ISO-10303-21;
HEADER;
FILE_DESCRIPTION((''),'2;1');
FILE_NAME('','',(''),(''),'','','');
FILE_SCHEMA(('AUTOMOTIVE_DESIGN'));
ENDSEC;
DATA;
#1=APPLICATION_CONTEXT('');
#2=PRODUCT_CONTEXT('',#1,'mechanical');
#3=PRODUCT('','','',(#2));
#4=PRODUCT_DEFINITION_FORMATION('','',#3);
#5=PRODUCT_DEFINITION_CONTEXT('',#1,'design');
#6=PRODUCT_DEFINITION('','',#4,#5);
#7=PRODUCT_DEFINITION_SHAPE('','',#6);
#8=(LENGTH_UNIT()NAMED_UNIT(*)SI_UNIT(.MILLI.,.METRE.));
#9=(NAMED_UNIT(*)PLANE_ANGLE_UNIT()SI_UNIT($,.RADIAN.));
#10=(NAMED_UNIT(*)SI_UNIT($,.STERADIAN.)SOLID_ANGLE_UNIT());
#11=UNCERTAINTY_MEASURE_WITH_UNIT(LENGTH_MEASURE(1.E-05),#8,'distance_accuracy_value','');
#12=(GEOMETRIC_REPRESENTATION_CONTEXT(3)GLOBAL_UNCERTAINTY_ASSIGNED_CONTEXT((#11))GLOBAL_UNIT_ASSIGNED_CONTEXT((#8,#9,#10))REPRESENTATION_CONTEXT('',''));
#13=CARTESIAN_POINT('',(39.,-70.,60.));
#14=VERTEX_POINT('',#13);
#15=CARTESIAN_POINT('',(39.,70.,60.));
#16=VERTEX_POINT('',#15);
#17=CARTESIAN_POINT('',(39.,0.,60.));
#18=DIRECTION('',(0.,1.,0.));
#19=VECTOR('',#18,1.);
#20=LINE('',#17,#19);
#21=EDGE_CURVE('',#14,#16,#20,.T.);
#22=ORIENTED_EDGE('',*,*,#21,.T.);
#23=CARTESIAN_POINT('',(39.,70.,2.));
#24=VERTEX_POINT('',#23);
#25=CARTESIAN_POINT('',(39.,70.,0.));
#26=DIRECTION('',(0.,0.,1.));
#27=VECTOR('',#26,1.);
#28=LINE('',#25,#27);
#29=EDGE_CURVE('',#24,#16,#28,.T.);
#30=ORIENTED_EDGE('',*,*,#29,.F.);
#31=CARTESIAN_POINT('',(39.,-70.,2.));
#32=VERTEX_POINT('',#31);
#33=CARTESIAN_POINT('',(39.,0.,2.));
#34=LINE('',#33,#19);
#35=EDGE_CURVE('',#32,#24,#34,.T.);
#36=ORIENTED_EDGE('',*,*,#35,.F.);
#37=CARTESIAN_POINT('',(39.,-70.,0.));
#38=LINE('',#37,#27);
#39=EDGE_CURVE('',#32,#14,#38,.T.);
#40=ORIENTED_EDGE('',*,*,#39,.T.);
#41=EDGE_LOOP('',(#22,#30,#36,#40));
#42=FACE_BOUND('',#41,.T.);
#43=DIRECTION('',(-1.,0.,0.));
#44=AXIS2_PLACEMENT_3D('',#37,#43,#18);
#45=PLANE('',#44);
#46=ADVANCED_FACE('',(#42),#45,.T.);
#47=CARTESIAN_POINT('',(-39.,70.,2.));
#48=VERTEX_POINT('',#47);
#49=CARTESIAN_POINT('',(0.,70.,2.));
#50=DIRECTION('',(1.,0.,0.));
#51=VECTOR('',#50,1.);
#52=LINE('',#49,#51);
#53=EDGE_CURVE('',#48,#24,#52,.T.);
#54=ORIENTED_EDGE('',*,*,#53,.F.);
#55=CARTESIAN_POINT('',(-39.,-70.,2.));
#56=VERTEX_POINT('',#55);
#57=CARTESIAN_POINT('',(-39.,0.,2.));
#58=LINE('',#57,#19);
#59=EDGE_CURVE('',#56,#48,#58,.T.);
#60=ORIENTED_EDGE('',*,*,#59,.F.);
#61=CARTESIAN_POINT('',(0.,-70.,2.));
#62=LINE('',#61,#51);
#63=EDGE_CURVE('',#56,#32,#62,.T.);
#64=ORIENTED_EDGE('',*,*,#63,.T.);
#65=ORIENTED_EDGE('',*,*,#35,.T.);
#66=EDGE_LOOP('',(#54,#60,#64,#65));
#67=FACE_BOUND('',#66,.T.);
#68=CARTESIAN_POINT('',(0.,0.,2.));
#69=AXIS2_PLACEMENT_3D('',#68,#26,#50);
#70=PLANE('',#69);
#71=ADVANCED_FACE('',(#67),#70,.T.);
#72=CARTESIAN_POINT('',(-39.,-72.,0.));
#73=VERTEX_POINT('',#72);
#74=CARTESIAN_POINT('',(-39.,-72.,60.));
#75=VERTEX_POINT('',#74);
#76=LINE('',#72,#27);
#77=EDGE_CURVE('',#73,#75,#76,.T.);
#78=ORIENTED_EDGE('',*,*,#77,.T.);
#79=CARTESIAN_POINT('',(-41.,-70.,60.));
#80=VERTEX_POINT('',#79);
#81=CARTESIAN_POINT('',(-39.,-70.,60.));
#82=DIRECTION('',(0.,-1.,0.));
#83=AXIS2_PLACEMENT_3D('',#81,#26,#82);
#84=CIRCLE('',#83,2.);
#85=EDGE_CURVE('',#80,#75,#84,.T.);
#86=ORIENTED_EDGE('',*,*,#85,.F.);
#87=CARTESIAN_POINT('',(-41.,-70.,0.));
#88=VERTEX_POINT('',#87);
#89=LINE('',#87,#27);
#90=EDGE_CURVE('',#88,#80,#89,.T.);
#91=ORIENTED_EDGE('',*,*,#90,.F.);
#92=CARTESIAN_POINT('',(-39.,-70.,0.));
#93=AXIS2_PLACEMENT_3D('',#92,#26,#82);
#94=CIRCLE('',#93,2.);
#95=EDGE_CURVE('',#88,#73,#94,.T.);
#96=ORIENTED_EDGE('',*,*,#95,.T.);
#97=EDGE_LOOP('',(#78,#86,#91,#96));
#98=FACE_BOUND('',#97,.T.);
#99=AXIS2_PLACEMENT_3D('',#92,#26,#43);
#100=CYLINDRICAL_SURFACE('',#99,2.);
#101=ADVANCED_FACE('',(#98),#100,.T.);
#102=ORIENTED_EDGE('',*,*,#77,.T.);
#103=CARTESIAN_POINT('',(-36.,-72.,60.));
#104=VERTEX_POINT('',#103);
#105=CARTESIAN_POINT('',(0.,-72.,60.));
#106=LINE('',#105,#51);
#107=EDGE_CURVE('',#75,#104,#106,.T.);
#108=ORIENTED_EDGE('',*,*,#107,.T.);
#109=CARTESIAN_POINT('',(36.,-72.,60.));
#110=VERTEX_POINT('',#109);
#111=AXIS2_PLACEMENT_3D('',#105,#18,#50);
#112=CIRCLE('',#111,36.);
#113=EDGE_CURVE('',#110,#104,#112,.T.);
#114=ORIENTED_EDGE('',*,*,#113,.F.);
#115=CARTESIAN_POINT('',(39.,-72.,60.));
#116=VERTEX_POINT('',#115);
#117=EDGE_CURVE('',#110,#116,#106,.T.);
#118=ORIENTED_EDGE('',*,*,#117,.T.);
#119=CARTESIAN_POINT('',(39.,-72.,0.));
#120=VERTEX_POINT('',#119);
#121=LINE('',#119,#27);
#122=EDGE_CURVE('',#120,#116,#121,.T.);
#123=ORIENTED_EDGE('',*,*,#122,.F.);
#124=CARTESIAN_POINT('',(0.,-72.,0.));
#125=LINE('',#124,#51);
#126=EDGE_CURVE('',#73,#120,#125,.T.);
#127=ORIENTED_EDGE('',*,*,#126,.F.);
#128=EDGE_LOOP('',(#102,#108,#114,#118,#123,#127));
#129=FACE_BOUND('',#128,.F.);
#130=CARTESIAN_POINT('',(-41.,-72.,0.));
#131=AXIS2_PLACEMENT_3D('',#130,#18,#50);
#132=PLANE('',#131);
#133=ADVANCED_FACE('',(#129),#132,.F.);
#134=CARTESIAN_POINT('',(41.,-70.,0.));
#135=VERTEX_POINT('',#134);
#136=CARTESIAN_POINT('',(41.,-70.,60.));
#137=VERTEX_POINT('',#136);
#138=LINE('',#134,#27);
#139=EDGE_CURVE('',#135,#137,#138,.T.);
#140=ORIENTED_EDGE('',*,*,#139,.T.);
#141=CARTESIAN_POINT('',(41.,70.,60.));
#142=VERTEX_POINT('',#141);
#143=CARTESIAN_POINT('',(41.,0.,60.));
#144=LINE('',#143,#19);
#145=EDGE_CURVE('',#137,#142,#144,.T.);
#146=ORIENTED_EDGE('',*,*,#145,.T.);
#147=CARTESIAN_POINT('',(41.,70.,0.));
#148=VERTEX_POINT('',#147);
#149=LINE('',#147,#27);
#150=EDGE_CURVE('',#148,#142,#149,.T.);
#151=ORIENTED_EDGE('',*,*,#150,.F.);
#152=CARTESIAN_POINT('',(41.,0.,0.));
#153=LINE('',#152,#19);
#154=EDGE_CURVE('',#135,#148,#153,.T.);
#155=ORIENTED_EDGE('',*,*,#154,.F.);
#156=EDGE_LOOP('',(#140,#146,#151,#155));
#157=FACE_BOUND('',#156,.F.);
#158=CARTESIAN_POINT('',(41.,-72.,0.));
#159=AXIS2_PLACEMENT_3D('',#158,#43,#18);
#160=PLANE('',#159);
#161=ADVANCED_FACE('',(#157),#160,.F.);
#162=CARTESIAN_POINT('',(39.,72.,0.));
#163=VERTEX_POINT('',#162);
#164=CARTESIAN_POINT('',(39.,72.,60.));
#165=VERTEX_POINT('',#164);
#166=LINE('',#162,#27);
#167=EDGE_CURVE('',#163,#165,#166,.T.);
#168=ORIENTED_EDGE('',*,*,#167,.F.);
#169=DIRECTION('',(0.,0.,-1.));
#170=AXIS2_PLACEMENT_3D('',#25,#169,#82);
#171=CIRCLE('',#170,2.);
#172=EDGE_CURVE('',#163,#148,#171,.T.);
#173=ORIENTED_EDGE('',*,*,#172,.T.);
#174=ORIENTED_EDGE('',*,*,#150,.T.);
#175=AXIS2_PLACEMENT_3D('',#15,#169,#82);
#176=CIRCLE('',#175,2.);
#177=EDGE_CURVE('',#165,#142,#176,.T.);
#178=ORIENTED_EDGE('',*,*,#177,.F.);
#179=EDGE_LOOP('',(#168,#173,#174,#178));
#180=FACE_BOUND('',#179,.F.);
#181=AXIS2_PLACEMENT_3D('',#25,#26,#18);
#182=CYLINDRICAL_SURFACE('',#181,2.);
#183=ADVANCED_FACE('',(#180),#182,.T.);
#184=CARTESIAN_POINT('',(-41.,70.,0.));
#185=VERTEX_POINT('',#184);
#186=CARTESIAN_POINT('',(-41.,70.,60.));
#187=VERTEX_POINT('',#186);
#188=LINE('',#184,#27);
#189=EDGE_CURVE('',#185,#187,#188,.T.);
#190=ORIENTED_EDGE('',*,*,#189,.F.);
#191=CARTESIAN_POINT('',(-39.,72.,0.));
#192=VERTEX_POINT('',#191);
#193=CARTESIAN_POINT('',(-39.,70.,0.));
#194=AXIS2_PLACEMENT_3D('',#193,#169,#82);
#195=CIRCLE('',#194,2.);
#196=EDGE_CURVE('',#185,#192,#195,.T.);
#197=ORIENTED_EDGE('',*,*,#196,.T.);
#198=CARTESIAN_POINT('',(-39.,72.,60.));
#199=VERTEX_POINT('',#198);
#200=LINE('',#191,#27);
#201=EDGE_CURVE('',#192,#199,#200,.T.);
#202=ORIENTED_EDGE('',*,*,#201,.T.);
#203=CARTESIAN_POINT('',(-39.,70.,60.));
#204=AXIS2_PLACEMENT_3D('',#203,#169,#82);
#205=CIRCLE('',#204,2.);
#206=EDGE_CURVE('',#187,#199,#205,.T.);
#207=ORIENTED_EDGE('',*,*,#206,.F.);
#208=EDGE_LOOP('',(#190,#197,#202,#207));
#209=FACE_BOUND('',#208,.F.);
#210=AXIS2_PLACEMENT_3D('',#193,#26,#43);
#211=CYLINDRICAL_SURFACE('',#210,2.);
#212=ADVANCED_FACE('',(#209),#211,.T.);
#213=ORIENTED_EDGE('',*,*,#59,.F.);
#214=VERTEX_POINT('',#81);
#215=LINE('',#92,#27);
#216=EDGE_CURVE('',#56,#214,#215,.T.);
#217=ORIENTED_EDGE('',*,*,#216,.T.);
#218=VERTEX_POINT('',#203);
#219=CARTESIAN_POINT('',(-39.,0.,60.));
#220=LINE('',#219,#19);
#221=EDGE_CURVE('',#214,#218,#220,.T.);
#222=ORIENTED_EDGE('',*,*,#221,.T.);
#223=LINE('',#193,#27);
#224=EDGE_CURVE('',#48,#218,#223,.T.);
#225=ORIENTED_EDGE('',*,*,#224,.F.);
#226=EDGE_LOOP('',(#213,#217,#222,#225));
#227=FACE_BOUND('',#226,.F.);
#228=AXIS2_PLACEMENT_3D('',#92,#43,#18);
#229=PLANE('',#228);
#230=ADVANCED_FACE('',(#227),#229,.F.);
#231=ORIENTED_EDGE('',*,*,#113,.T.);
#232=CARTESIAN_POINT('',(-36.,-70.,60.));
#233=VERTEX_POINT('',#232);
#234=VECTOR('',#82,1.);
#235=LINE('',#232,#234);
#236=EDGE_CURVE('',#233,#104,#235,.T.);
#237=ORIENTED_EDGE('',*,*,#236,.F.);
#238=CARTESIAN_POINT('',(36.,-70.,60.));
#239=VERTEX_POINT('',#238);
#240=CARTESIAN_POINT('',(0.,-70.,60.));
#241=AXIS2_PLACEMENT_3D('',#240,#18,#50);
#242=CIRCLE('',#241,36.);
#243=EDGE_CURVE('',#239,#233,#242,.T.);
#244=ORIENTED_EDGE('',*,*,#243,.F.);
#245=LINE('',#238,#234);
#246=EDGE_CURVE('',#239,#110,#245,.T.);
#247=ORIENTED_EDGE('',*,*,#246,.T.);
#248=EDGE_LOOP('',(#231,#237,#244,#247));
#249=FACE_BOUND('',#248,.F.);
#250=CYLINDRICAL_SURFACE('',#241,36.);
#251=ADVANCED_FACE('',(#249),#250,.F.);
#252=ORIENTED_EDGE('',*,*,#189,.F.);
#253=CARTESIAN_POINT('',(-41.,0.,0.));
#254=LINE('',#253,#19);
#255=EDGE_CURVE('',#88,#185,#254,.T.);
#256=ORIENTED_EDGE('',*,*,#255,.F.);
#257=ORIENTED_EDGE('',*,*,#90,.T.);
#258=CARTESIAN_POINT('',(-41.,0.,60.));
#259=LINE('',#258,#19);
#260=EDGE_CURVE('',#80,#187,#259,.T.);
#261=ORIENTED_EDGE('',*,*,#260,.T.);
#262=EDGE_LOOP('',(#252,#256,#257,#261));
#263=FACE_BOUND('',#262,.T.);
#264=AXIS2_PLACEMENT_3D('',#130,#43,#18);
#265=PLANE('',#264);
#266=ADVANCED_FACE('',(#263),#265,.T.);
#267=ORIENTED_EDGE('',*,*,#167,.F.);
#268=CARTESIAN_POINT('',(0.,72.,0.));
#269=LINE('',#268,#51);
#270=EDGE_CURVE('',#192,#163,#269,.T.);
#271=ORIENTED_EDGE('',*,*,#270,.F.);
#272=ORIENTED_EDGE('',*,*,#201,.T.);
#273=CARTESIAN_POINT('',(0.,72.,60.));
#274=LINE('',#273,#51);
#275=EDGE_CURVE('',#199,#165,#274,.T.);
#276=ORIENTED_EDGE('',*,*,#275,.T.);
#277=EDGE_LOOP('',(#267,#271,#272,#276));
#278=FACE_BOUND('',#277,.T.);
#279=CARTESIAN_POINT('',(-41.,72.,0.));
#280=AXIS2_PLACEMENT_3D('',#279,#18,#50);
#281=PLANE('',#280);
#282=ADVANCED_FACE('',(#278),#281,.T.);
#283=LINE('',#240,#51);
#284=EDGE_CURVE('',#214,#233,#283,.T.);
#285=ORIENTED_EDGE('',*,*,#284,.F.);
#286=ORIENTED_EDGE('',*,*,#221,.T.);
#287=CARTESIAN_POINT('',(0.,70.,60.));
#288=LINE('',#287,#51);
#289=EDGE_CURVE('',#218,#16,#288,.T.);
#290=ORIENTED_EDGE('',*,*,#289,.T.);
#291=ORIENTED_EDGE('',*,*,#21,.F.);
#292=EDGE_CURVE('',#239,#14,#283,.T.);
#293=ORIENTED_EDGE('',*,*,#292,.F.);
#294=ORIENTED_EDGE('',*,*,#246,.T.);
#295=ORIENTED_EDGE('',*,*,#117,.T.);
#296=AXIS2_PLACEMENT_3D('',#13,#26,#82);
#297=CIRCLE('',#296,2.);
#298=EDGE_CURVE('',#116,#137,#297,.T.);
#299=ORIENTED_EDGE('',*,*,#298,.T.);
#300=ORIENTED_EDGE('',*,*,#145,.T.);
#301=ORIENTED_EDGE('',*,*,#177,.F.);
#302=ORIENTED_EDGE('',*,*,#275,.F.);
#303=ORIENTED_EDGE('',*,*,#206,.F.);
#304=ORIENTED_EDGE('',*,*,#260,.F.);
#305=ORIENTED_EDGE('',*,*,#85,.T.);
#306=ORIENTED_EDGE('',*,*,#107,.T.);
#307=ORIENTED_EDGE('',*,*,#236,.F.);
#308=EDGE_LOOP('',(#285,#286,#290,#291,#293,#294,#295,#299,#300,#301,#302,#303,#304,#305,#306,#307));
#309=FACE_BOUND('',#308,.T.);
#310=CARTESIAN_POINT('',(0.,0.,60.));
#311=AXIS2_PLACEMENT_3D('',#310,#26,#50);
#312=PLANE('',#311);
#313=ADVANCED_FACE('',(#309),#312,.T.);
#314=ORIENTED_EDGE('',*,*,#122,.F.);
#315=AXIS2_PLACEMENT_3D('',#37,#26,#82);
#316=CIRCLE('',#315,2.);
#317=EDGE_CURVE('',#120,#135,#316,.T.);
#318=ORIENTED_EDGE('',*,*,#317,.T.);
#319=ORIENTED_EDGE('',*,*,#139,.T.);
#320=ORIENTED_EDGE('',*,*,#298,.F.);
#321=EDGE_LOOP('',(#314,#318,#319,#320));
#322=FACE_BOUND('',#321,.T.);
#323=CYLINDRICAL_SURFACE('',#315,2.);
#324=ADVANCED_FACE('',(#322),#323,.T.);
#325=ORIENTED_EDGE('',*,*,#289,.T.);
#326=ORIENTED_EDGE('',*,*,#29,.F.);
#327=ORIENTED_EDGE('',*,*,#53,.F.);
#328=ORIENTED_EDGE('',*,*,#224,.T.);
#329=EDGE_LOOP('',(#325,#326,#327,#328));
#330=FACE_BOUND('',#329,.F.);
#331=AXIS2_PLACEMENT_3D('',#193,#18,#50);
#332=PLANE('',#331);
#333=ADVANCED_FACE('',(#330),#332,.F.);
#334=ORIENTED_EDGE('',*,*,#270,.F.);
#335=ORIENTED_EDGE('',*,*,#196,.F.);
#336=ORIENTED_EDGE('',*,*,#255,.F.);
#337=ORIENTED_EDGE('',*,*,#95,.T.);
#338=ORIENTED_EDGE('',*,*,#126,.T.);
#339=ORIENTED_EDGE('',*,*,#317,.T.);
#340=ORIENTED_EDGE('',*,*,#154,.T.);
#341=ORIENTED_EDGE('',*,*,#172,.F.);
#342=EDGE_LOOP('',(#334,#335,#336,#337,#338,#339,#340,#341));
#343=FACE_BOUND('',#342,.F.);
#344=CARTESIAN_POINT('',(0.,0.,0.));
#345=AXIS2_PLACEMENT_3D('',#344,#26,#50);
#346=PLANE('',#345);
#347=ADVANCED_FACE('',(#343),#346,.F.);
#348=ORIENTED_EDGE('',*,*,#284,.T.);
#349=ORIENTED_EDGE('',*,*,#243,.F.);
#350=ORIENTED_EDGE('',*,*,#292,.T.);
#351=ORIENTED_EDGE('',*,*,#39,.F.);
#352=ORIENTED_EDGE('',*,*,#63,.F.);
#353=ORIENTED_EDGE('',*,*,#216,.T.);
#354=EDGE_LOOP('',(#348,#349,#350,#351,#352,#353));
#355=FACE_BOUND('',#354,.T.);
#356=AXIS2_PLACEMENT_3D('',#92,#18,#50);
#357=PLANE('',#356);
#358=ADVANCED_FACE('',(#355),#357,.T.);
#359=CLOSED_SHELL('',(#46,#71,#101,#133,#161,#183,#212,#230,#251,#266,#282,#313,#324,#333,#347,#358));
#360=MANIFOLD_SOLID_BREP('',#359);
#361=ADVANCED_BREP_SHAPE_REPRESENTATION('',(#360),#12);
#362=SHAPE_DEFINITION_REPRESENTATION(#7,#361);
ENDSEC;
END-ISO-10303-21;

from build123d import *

# Parameters (mm, degrees)
F0_W     = 78
F0_H     = 140
F1_DEPTH = 2
F0_W_2   = 82
F0_H_2   = 144
F2_DEPTH = 60
F4_DEPTH = 25
F5_R     = 2


# Not quite as in the source:
# - a feature names something its author has since deleted; it is built from what else it names


with BuildPart() as f1:
    # F0 (on Top) → F1 (new body)
    with BuildSketch(Plane.XY):
        Rectangle(F0_W, F0_H)
    extrude(amount=F1_DEPTH)

    # F0 (on Top) → F2 (join)
    with BuildSketch(Plane.XY):
        Rectangle(F0_W_2, F0_H_2)
        Rectangle(F0_W, F0_H, mode=Mode.SUBTRACT)
    extrude(amount=F2_DEPTH)

    # F3 (on face) → F4 (cut)
    with BuildSketch(Plane(origin=(0, -70, 0), x_dir=(-1, 0, 0), z_dir=(0, 1, 0))):
        with BuildLine():
            Line((36, 60), (-36, 60))
            ThreePointArc((-36, 60), (0, 24), (36, 60))
        make_face()
    extrude(amount=-F4_DEPTH, mode=Mode.SUBTRACT)

    # F5
    f5_edges = [f1.edges().sort_by_distance(p)[0] for p in [
        (-41, 72, 30),
        (41, 72, 30),
        (-41, -72, 30),
        (41, -72, 30),
    ]]
    fillet(f5_edges, radius=F5_R)


solid = f1.part
